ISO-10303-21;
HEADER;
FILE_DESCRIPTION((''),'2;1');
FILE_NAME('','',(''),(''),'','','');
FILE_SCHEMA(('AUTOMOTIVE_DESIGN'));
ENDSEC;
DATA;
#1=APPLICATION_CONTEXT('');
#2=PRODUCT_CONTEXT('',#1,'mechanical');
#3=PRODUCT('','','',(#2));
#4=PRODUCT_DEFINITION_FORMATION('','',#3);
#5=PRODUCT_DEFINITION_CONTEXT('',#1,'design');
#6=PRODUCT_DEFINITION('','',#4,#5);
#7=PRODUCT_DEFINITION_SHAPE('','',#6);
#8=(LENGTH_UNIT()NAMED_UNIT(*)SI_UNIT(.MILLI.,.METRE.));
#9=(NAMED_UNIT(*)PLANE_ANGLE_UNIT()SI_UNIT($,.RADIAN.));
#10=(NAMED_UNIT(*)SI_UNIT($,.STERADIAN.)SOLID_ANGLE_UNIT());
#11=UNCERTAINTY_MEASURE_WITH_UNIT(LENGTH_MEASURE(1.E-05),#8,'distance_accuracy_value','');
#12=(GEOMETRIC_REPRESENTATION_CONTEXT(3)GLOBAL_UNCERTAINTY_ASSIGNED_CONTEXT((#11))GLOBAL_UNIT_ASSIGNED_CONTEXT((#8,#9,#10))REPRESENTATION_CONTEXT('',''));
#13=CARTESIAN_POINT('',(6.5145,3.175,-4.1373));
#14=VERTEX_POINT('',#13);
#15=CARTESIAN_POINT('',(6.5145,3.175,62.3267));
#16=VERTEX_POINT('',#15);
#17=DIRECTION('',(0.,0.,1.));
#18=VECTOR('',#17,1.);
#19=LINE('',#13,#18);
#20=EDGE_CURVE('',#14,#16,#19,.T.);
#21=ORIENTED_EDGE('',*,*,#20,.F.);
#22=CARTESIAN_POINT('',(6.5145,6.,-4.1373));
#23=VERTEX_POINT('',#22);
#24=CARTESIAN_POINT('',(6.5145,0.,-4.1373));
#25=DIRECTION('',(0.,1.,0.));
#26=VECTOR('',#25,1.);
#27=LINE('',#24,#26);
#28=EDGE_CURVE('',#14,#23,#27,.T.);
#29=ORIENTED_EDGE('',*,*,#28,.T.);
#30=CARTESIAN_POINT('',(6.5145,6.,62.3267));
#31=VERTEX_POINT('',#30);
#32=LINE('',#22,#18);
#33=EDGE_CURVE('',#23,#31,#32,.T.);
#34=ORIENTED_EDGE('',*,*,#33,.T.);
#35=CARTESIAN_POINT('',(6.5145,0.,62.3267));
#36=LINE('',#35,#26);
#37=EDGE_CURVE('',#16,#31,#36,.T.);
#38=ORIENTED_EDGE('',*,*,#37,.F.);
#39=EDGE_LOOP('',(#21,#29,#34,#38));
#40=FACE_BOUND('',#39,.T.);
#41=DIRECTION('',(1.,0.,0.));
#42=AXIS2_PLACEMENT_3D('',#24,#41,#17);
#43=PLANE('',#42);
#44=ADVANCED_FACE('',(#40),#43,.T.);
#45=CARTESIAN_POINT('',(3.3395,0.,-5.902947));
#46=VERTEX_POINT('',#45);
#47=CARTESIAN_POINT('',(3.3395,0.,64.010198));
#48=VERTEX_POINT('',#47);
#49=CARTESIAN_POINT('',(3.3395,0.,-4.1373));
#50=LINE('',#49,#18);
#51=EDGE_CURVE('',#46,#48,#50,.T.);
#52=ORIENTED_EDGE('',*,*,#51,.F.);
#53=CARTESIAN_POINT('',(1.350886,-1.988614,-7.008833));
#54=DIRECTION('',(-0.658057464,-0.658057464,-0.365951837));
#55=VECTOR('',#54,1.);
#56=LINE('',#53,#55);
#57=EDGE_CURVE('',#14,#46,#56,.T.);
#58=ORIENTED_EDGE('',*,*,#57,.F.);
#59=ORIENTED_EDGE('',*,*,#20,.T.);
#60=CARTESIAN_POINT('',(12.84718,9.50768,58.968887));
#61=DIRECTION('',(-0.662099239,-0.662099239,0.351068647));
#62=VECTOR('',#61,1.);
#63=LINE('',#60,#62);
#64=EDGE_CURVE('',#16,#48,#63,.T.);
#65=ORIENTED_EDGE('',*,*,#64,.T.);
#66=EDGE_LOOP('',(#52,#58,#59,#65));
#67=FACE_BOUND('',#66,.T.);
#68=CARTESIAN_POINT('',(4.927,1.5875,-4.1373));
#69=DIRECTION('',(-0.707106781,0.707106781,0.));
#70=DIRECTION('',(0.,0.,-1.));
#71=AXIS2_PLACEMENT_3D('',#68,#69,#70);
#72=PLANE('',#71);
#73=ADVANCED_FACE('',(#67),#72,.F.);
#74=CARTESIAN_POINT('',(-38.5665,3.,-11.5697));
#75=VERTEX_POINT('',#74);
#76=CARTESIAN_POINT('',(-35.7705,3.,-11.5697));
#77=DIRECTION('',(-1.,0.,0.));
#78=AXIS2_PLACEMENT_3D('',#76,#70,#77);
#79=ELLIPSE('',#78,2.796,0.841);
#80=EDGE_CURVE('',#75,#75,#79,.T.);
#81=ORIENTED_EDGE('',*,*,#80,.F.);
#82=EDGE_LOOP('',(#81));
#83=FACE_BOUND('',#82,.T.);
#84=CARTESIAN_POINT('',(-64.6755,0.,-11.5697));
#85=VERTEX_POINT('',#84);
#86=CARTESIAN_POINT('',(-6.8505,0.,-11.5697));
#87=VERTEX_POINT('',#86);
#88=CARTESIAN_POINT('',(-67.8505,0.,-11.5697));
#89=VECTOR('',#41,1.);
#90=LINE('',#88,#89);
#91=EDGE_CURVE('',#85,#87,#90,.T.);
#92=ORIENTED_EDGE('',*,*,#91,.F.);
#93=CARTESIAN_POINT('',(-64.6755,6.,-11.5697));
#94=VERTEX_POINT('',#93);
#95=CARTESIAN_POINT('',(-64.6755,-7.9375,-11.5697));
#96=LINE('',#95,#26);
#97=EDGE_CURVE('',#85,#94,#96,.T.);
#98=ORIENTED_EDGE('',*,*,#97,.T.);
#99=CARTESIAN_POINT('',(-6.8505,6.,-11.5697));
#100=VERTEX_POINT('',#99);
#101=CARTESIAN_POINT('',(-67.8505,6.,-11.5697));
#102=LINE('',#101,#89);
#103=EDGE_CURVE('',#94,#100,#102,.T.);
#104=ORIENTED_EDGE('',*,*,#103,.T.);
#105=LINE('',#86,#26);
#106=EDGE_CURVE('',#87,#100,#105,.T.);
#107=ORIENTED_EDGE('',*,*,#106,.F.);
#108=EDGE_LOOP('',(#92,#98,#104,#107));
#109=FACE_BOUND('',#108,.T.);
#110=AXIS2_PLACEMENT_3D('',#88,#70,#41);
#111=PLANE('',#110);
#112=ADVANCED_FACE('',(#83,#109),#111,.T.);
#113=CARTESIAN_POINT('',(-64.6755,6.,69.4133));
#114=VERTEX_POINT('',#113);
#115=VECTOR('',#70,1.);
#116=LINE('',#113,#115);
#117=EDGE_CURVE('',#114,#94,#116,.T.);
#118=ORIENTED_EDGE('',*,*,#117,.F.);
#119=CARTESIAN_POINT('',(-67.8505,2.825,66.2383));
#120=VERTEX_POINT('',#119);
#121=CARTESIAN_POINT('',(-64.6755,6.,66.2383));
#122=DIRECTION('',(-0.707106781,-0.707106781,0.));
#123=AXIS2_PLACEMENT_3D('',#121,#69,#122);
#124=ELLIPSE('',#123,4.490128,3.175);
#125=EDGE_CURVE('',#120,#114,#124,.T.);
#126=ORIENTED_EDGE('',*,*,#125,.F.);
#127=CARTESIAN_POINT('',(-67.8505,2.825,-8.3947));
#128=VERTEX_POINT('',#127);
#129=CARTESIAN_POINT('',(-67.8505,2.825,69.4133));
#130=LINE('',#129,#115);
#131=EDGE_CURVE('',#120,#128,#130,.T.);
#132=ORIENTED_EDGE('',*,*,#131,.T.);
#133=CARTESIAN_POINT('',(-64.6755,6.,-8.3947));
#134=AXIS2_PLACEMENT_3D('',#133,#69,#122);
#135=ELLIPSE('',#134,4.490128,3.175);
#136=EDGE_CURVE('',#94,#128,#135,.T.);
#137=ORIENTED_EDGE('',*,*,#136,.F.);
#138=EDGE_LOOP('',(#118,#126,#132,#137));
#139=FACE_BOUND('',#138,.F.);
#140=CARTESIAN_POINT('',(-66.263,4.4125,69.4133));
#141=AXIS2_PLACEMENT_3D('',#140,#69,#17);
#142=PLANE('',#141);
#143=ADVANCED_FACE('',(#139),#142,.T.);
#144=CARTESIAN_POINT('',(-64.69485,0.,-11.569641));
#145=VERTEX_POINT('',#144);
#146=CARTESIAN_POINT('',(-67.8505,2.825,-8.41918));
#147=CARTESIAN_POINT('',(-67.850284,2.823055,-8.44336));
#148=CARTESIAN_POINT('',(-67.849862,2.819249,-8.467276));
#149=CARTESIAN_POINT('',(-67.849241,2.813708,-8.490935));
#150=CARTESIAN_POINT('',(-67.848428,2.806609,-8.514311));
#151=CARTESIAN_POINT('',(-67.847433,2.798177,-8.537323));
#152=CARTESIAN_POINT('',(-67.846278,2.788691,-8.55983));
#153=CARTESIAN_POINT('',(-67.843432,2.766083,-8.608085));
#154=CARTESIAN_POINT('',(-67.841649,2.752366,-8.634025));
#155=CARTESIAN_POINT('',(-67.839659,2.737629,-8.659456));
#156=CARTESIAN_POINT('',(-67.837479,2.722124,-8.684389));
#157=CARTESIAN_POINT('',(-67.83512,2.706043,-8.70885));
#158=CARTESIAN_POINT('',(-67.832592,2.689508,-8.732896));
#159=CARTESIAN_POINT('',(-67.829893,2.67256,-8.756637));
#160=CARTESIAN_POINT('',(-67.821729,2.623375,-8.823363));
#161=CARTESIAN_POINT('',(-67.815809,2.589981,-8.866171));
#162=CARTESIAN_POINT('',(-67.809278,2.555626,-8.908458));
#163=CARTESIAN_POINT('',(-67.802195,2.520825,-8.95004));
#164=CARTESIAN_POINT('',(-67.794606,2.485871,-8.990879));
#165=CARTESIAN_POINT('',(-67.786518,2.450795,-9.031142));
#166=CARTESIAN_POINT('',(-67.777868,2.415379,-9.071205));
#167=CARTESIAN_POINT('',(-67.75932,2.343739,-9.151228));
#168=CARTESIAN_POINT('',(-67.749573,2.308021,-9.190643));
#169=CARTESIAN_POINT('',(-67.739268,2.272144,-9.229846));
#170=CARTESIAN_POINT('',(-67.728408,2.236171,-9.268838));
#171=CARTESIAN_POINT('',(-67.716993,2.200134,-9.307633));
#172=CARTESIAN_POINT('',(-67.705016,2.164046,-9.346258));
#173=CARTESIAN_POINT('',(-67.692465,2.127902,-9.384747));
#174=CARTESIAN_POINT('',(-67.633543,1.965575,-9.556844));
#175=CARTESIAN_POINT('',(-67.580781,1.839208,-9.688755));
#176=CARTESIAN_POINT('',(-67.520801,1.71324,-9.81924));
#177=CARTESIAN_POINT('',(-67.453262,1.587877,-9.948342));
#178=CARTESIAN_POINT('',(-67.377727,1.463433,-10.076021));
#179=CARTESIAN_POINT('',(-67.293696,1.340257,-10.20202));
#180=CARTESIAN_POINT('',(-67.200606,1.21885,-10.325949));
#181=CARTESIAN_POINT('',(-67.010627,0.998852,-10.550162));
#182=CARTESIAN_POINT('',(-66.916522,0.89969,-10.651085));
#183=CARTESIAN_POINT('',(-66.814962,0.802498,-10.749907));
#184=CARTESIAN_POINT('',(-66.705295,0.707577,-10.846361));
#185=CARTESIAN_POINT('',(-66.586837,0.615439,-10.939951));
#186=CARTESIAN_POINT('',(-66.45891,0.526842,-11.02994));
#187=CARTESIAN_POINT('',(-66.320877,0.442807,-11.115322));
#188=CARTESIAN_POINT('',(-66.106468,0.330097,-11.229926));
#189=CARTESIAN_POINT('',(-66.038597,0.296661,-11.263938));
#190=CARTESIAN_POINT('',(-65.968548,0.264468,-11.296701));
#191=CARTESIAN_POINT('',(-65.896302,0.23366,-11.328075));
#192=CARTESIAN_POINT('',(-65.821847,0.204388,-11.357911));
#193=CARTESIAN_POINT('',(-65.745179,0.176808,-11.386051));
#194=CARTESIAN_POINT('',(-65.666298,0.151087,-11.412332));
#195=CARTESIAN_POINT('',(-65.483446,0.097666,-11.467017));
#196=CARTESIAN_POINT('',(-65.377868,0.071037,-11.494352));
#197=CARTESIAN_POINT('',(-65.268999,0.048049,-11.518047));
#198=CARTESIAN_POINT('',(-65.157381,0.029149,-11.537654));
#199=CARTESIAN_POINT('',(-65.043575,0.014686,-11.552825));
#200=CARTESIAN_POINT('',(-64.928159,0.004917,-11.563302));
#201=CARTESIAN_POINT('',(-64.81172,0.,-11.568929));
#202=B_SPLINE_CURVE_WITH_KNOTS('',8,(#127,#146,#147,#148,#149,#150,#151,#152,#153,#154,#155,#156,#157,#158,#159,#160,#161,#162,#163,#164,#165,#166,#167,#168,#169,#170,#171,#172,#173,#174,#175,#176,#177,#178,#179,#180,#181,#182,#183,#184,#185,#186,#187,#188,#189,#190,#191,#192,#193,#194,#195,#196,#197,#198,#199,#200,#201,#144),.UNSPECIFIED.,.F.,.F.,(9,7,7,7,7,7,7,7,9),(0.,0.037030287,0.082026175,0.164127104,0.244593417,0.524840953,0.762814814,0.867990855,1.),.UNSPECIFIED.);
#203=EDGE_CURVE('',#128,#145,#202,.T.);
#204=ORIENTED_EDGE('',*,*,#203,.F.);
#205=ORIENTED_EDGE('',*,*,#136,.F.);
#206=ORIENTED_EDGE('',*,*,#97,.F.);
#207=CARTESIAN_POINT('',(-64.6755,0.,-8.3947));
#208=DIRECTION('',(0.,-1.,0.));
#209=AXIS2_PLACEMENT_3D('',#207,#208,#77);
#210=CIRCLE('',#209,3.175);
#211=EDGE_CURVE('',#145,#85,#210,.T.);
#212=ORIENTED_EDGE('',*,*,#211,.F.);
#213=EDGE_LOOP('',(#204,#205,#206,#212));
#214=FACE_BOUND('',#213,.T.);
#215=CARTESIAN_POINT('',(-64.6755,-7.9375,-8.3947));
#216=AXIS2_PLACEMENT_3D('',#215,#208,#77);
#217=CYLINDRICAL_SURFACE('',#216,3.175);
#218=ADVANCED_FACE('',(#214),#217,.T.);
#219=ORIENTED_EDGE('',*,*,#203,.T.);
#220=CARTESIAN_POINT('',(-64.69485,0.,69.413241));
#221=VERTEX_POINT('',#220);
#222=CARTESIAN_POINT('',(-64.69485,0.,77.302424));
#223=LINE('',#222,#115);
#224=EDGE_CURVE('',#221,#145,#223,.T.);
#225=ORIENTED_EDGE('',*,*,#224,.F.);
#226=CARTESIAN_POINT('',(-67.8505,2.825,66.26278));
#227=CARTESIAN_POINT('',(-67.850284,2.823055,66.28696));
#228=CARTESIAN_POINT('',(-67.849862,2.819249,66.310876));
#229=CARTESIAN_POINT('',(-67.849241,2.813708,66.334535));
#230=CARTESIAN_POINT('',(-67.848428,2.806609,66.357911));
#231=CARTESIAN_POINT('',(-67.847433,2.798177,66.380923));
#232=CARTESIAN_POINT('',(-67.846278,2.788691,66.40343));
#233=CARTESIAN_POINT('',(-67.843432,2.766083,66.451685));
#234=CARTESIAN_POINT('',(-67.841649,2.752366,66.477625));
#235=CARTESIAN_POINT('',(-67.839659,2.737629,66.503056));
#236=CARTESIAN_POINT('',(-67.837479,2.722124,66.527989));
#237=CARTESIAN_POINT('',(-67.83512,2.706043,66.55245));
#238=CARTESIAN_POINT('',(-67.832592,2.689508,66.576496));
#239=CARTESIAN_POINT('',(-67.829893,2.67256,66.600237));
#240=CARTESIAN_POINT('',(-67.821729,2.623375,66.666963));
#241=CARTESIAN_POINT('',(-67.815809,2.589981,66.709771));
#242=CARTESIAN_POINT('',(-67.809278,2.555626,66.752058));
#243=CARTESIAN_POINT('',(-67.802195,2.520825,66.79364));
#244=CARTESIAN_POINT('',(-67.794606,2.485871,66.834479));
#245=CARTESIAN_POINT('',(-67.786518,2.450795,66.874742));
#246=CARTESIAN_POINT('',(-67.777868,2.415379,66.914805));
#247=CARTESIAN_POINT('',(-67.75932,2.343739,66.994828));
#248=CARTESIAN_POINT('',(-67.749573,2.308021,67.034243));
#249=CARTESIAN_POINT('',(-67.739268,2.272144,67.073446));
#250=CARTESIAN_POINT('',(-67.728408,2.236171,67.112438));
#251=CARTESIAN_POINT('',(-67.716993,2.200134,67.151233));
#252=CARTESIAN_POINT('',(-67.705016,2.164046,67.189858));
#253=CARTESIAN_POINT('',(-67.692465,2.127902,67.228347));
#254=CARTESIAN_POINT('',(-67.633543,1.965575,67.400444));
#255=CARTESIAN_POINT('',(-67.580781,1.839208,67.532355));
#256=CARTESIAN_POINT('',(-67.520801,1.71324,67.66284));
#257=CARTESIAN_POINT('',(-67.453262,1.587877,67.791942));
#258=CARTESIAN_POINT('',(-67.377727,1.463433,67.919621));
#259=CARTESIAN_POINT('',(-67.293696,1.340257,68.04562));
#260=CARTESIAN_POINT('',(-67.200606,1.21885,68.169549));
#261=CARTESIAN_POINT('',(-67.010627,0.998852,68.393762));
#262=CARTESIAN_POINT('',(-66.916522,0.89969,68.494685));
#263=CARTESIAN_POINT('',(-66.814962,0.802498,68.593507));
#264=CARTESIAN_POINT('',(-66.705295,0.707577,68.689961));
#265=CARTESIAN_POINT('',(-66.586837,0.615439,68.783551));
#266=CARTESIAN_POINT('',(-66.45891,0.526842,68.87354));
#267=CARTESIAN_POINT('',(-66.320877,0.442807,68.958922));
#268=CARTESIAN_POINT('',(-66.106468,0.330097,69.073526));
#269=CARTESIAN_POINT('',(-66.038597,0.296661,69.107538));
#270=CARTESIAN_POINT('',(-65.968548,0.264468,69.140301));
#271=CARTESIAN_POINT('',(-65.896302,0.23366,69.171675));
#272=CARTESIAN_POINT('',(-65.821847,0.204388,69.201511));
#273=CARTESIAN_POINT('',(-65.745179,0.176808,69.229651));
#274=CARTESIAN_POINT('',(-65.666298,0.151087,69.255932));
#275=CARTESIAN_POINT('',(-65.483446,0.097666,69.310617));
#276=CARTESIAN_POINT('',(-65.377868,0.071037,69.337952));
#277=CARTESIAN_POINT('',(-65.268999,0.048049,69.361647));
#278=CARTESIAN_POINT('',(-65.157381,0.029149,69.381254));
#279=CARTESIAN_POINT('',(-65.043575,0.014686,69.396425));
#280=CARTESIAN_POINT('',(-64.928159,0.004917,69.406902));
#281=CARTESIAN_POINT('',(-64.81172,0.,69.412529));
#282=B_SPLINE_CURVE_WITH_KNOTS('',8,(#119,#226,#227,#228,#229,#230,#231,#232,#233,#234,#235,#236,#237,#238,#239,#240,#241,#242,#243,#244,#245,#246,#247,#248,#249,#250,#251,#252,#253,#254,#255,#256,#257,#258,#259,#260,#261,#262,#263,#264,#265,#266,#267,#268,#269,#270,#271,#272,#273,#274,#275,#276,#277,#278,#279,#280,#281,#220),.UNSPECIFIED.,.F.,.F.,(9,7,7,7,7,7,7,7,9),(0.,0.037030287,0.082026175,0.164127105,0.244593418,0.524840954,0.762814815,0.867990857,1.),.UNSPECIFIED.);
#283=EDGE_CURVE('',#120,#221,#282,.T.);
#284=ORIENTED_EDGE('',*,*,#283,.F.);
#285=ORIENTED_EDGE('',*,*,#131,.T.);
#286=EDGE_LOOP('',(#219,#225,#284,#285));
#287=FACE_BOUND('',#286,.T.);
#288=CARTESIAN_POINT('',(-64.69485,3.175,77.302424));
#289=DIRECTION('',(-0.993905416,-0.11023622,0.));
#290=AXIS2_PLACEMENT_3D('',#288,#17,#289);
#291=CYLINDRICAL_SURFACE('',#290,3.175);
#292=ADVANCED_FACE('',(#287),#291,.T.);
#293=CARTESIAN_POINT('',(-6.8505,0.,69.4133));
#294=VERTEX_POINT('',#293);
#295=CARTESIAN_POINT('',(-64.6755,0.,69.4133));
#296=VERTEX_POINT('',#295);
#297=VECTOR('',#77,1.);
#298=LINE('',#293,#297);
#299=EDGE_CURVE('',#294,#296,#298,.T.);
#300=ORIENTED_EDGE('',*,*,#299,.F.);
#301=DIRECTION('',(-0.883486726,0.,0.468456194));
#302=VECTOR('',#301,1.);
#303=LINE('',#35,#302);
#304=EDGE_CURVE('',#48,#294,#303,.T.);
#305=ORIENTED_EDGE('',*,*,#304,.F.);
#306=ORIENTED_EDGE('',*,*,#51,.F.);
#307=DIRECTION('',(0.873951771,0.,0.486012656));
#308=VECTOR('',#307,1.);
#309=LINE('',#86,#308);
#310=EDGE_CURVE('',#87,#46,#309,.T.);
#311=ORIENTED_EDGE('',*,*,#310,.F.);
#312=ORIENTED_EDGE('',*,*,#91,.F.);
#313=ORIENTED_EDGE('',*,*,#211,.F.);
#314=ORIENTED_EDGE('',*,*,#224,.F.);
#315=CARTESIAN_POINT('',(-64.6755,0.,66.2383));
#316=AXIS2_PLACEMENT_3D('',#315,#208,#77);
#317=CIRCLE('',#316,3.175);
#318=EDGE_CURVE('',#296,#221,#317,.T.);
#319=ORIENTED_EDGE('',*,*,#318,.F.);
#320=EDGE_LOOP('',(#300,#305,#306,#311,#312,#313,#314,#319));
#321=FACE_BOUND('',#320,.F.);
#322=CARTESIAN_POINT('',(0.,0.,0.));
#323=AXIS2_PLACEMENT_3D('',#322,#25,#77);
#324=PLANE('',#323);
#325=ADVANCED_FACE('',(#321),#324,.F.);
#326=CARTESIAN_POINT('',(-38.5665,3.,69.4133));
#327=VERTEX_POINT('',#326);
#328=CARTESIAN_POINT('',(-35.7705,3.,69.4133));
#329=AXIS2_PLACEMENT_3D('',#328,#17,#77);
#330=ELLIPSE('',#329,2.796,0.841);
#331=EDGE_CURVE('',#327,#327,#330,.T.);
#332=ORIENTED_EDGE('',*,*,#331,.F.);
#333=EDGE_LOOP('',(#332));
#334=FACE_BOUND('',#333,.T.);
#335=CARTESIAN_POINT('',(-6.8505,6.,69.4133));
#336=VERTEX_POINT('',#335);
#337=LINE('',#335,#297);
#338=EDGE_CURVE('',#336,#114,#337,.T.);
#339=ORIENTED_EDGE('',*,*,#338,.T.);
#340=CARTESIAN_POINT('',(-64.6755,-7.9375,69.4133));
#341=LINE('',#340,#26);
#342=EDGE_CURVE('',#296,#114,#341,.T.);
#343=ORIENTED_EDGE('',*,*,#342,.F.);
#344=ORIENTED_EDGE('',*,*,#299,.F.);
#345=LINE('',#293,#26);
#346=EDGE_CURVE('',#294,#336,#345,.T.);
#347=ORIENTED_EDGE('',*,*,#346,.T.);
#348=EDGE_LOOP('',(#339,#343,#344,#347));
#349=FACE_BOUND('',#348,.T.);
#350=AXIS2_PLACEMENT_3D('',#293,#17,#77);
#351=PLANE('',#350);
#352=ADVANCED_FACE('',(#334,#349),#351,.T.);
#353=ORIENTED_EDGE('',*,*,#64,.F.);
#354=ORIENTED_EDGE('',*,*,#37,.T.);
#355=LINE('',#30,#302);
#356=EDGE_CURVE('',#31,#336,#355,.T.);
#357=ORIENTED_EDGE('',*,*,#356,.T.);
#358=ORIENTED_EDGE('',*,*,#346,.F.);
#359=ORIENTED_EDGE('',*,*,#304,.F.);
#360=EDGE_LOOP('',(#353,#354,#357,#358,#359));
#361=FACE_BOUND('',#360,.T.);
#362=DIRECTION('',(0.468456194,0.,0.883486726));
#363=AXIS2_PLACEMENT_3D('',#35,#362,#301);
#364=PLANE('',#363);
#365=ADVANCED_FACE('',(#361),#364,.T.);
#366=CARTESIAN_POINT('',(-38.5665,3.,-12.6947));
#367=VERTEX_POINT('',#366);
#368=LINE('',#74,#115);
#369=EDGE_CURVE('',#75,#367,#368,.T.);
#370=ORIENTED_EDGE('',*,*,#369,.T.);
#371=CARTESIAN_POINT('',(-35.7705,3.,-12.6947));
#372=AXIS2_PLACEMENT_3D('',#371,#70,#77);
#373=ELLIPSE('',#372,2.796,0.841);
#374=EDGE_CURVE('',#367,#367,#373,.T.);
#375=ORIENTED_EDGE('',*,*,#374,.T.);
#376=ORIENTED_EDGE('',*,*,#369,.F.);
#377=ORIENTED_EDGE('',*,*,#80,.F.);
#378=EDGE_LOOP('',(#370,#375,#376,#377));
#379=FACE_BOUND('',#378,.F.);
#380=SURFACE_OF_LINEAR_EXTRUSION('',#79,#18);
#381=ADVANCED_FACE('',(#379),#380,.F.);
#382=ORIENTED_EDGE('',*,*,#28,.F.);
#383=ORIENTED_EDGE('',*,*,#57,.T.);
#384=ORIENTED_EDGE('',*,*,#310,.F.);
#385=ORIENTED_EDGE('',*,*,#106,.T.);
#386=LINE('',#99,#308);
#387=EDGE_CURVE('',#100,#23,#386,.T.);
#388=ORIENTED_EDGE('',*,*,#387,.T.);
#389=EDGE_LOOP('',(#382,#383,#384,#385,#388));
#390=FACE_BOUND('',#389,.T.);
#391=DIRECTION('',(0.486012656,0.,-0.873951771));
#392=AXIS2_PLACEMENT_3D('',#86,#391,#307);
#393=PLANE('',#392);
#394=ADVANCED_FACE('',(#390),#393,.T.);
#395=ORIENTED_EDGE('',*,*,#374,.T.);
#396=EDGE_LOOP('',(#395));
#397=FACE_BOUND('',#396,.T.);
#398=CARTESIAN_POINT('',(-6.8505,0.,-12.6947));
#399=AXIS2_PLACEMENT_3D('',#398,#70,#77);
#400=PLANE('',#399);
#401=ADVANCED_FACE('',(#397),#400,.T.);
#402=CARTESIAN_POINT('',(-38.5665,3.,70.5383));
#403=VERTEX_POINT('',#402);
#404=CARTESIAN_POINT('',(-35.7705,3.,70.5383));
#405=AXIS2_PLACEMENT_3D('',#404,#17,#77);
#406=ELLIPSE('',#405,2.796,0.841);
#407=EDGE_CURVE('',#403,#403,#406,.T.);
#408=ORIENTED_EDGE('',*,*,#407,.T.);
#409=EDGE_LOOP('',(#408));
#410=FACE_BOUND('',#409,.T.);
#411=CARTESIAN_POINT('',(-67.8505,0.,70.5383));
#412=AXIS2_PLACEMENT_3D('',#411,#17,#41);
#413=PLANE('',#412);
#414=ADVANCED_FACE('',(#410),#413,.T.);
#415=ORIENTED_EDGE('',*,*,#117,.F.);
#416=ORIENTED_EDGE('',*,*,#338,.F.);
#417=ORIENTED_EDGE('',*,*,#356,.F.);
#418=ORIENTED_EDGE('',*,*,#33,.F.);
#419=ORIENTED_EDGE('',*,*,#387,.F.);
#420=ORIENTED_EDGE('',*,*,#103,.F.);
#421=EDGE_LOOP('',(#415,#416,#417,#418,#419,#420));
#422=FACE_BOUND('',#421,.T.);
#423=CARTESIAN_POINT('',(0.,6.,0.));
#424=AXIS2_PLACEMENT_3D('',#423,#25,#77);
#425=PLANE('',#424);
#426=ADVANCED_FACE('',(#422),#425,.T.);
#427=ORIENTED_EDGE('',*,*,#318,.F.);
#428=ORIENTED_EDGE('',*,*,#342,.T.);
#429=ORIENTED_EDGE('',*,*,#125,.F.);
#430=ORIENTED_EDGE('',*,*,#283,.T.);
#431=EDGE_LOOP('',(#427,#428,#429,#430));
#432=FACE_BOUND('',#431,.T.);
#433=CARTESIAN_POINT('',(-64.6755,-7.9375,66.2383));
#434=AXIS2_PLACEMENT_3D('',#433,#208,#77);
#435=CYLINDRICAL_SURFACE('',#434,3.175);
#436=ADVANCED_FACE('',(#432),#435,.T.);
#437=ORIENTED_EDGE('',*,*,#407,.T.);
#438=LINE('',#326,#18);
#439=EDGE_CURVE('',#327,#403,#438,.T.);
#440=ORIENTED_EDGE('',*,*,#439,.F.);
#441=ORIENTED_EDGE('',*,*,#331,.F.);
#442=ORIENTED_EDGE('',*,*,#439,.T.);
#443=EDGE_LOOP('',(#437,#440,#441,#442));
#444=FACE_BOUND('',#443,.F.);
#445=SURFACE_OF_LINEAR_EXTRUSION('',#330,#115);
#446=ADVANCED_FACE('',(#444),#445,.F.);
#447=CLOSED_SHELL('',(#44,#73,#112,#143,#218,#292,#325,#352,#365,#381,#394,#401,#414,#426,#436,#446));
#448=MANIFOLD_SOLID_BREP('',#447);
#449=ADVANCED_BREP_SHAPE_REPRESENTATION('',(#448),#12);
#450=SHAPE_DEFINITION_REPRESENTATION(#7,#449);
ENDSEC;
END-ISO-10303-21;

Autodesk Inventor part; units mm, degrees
ref_plane "YZ Plane" through (0, 0, 0) normal (1, 0, 0) x (0, 1, 0)
ref_plane "XZ Plane" through (0, 0, 0) normal (0, 1, 0) x (-1, 0, 0)
ref_plane "XY Plane" through (0, 0, 0) normal (0, 0, 1) x (1, 0, 0)
sketch "Sketch1" plane through (0, 0, 0) normal (0, 1, 0) x (-1, 0, 0)
  line L0 (67.8505, 69.4133) -> (67.8505, -11.5697)
  line L1 (67.8505, -11.5697) -> (6.8505, -11.5697)
  line L2 (6.8505, -11.5697) -> (-6.5145, -4.1373)
  line L3 (-6.5145, -4.1373) -> (-6.5145, 62.3267)
  line L4 (-6.5145, 62.3267) -> (6.8505, 69.4133)
  line L5 (6.8505, 69.4133) -> (67.8505, 69.4133)
extrude "Extrusion1" add sketch "Sketch1" along normal blind 6
sketch "Sketch2" plane through (-6.8505, 0, -11.5697) normal (0, 0, -1) x (-1, 0, 0)
  line L0 (0, 0) -> (0, 6) construction
  ellipse E0 centre (28.92, 3) end of major axis (31.716, 3) minor radius 0.841
  line L1 (-13.365, 0) -> (-13.365, 6) construction
  point P0 (-6.8505, 0)
  dimension "d9" = 2.796
  dimension "d12" = 0.841
  dimension "d11" = 28.92
extrude "Extrusion2" add sketch "Sketch2" along normal blind 1.125
sketch "Sketch3" plane through (-67.8505, 0, 69.4133) normal (0, 0, 1) x (1, 0, 0)
  ellipse E0 centre (32.08, 3) end of major axis (34.876, 3) minor radius 0.841 construction
  ellipse E1 centre (32.08, 3) end of major axis (29.284, 3) minor radius 0.841
  point P0 (67.8505, 0)
extrude "Extrusion3" add sketch "Sketch3" along normal blind 1.125
chamfer "Chamfer1" distance 3.175 angle 45 1 edges at (-67.8505, 6, 28.9218)
fillet "Fillet1" radius 3.175 3 edges at (-67.8505, 0, 28.9218) (-67.8505, 1.4125, -11.5697) (-67.8505, 1.4125, 69.4133)
chamfer "Chamfer2" distance 3.175 angle 45 1 edges at (6.5145, 0, 29.0947)
properties part number "Moto G3 Phone Case Back"
